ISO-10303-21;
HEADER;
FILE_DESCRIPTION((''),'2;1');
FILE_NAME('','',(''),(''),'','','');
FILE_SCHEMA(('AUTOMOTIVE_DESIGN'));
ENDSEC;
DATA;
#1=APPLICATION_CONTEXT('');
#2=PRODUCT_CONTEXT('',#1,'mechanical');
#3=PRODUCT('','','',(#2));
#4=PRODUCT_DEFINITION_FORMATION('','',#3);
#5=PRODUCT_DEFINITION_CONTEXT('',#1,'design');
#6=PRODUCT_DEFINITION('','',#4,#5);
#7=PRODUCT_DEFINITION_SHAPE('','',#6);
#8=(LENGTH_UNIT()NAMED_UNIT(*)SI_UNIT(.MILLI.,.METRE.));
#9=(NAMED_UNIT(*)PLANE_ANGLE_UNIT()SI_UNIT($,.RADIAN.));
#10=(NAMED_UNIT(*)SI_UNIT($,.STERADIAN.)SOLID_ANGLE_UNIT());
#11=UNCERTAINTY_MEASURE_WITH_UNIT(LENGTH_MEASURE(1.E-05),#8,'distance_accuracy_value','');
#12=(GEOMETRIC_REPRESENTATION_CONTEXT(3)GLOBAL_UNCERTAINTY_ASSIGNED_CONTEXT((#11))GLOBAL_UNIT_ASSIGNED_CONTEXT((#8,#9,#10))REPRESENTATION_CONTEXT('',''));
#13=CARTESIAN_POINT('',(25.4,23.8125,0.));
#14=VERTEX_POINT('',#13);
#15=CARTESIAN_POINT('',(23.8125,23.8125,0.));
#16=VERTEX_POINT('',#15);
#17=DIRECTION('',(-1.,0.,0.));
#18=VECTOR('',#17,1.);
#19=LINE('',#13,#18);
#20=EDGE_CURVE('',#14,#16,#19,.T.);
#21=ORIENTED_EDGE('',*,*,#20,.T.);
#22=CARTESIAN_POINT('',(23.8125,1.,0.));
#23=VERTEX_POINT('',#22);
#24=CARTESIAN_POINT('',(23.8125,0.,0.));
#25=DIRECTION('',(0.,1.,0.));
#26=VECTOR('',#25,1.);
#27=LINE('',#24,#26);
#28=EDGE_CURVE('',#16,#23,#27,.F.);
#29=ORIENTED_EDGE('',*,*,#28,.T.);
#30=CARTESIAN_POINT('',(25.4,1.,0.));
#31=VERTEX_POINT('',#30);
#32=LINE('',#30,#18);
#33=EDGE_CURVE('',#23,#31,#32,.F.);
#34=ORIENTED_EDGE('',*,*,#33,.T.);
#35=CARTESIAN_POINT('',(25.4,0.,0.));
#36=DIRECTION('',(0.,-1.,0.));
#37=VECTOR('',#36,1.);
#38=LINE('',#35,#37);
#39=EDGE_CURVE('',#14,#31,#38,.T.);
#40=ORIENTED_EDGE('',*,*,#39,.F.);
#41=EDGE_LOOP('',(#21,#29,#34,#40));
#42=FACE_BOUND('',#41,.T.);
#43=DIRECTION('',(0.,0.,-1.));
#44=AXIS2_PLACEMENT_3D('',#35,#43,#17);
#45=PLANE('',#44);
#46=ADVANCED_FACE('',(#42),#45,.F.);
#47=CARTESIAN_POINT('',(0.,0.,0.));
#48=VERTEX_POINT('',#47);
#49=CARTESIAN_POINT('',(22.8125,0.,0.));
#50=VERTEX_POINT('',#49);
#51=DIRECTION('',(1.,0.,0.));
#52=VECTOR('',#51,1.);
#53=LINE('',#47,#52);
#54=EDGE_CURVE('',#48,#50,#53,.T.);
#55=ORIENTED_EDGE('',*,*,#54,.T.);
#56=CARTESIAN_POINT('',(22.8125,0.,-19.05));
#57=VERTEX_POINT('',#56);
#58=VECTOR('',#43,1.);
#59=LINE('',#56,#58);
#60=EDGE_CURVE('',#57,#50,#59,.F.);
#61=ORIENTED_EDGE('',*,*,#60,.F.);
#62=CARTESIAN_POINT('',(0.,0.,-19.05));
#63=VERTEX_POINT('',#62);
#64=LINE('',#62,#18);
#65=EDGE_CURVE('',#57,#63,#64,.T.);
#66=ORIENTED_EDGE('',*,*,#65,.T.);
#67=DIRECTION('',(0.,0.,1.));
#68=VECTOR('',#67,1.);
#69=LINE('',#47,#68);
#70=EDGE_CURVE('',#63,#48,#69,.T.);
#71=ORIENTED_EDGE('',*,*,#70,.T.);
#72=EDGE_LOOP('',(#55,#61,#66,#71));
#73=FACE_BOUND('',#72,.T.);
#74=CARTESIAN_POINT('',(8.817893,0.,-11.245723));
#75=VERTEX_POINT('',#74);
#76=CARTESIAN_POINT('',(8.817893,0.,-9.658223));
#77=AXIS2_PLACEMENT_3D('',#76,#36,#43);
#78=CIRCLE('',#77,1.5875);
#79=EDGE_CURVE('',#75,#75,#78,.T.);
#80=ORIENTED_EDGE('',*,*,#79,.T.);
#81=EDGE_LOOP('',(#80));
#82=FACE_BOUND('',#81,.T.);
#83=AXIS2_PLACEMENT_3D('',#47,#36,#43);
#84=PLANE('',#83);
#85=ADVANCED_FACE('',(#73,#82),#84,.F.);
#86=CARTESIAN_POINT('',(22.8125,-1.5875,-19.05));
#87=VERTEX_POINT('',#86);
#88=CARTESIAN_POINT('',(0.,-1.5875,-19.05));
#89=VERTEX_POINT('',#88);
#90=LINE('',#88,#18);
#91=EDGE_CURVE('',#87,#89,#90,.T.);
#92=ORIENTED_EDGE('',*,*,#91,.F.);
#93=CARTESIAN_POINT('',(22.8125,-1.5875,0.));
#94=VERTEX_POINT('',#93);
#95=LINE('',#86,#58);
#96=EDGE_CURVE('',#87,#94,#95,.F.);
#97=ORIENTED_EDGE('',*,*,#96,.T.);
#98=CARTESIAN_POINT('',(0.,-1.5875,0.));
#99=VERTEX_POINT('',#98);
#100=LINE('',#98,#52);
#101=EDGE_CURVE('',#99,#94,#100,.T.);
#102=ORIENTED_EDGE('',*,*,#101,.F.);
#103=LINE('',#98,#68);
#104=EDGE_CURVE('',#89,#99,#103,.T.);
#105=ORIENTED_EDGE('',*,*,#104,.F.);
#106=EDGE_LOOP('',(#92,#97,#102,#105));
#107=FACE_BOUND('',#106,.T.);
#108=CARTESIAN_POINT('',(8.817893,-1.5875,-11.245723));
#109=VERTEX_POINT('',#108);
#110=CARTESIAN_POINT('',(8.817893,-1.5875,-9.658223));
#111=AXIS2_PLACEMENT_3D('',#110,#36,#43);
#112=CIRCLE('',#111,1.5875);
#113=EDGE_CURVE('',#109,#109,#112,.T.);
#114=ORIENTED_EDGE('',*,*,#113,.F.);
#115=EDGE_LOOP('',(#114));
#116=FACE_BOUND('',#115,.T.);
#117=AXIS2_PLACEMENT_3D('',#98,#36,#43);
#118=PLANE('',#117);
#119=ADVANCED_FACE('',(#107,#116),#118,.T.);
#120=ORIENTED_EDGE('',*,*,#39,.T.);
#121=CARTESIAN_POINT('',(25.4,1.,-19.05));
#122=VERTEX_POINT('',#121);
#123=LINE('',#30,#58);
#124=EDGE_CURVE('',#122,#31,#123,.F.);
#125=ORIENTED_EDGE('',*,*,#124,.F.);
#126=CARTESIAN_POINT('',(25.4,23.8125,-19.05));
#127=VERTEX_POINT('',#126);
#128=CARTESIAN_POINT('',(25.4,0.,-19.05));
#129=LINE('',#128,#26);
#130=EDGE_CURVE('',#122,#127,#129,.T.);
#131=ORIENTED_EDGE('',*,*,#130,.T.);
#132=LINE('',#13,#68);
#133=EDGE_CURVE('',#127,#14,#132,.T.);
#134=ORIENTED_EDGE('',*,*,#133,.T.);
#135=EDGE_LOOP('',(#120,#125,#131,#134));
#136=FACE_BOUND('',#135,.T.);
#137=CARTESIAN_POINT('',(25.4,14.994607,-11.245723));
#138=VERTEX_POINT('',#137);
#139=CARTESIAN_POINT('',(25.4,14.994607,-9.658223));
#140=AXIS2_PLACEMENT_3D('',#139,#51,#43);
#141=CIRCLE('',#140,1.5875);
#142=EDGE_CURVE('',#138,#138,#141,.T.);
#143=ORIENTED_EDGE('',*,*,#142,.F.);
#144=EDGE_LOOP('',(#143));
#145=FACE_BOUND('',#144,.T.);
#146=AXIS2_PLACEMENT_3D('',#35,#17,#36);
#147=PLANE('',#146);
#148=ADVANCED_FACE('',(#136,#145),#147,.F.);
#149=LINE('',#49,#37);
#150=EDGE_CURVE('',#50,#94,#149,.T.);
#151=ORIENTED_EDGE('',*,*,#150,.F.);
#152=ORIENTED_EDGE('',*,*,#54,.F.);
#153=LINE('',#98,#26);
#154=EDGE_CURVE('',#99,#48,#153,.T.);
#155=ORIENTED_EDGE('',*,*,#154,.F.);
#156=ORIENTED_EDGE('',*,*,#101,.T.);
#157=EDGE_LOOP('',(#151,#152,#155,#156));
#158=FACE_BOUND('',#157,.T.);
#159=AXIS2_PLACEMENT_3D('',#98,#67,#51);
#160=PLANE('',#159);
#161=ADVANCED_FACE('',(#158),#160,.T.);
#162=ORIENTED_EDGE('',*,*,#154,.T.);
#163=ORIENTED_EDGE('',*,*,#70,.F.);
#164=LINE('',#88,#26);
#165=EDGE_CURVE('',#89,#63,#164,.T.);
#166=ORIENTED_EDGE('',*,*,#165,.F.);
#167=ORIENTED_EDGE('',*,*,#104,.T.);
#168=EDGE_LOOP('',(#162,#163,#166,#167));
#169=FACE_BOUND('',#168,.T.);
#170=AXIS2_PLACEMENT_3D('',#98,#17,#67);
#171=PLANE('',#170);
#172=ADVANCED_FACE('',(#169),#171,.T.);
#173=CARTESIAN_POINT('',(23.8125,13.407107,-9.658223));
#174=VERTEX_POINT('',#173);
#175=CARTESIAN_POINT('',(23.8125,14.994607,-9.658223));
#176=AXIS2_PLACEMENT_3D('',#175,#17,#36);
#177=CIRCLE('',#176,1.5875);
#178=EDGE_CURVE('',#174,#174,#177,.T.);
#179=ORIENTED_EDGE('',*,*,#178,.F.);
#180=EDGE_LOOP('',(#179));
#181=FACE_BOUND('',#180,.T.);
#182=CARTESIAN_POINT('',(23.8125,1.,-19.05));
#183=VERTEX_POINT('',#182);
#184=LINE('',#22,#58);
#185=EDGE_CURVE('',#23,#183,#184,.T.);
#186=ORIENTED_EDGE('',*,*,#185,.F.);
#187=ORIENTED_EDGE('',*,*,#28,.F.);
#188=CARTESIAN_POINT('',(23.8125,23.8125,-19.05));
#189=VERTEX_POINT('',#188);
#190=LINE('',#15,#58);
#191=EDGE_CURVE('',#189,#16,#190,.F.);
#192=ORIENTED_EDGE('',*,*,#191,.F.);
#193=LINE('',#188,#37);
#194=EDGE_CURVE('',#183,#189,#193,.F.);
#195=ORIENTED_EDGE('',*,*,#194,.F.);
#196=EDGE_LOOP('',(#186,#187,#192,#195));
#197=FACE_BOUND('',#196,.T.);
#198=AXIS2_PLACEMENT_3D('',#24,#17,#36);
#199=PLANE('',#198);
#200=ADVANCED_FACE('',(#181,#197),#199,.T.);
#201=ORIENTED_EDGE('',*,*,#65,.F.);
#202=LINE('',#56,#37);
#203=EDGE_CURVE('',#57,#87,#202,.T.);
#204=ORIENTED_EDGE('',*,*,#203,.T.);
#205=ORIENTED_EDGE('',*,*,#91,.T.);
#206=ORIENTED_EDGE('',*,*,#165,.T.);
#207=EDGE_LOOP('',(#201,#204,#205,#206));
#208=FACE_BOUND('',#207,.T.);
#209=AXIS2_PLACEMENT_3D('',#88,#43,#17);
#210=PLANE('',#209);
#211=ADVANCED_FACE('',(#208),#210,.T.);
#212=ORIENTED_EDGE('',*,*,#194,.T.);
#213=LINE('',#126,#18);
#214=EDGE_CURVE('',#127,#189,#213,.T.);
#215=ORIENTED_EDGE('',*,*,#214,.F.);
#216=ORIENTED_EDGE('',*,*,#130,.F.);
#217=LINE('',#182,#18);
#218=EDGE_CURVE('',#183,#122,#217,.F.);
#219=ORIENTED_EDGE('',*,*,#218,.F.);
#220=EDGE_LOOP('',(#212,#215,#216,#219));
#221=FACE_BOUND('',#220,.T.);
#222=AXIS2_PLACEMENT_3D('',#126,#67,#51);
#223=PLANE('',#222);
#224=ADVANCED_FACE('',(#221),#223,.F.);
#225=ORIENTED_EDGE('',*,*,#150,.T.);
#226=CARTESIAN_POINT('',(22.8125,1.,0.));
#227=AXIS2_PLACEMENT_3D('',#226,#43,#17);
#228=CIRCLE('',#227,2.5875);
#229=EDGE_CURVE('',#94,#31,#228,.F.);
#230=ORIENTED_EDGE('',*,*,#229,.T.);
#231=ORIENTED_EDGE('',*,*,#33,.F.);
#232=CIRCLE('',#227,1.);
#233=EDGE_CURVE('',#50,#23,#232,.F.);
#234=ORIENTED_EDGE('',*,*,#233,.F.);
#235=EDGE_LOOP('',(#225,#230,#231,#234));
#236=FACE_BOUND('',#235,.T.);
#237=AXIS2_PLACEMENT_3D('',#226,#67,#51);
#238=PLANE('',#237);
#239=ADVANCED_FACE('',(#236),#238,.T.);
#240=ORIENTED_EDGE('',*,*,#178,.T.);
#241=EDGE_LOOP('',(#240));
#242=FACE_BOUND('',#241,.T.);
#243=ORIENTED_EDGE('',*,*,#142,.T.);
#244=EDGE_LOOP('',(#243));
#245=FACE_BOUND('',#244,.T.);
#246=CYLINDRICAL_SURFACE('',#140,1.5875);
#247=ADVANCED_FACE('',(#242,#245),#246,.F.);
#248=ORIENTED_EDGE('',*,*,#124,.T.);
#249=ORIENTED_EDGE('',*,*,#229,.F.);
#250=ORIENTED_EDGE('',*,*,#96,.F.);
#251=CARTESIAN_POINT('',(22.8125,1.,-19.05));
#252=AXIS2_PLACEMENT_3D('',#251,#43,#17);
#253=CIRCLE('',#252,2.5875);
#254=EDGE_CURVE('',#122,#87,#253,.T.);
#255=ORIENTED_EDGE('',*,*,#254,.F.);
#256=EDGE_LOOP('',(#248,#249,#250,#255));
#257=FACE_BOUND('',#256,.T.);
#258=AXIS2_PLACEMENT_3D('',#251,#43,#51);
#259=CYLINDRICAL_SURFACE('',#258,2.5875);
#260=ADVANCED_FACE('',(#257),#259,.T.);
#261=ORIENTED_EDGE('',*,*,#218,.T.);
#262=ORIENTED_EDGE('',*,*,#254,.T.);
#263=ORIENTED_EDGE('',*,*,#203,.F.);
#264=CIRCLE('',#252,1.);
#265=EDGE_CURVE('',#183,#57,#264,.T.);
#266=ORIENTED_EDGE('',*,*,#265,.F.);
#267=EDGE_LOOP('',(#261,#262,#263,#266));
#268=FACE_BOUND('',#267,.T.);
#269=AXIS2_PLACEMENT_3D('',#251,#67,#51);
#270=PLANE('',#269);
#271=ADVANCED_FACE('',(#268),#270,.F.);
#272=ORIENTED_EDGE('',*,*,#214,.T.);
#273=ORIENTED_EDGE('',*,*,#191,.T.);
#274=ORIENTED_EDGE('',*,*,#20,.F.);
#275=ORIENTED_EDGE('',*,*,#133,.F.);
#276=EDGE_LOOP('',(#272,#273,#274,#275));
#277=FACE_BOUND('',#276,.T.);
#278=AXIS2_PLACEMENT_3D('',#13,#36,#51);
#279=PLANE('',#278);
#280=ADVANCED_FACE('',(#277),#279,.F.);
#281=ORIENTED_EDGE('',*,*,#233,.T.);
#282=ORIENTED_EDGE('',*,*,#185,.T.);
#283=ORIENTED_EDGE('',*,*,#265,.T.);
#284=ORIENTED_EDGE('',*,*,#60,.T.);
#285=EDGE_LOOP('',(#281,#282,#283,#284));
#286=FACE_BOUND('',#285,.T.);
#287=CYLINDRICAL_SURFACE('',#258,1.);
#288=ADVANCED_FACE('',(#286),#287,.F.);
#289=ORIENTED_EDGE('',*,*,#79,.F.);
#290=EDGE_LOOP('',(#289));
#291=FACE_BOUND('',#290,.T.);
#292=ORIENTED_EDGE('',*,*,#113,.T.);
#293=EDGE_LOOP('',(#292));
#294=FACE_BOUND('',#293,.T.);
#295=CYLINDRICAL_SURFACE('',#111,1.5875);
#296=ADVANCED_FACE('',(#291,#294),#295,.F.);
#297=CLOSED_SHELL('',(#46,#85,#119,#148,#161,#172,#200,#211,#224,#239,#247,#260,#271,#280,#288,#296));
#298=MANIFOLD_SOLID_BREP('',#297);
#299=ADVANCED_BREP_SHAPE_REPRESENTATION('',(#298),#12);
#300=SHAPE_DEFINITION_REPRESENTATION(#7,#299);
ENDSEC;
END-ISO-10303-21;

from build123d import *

# Parameters (mm, degrees)
SKETCH1_W                    = 25.4
SKETCH1_H                    = 19.05
BASE_FLANGE1_DEPTH           = 1.5875
EDGE_FLANGE1_STRIP_W         = 8.35
EDGE_FLANGE1_STRIP_H         = 1.5875
EDGE_FLANGE1_STRIP_CUT_DEPTH = 19.05
EDGE_FLANGE1_DEPTH           = 19.05
F_1_8_0_125_DIAMETER_HOLE1_D = 3.175
F_1_8_0_125_DIAMETER_HOLE2_D = 3.175


# Sheet-metal steps are written as plain solids
with BuildPart() as part:
    # Sketch1 → Base-Flange1 (new body)
    with BuildSketch(Plane(origin=(0, 0, 0), x_dir=(1, 0, 0), z_dir=(0, 1, 0))):
        with Locations((12.7, 9.525)):
            Rectangle(SKETCH1_W, SKETCH1_H)
    extrude(amount=-BASE_FLANGE1_DEPTH)

    # Edge-Flange1 strip (across the edge) → Edge-Flange1 strip cut (cut)
    with BuildSketch(Plane(origin=(25.4, 0, 0), x_dir=(-1, 0, 0), z_dir=(0, 0, -1))):
        with Locations((-1.5875, -0.79375)):
            Rectangle(EDGE_FLANGE1_STRIP_W, EDGE_FLANGE1_STRIP_H)
    extrude(amount=EDGE_FLANGE1_STRIP_CUT_DEPTH, mode=Mode.SUBTRACT)

    # Edge-Flange1 section (across the edge) → Edge-Flange1 (add)
    with BuildSketch(Plane(origin=(25.4, 0, 0), x_dir=(-1, 0, 0), z_dir=(0, 0, -1))):
        with BuildLine():
            Line((0, 1), (0, 23.8125))
            Line((0, 23.8125), (1.5875, 23.8125))
            Line((1.5875, 23.8125), (1.5875, 1))
            ThreePointArc((1.5875, 1), (1.880393219, 0.292893219), (2.5875, 0))
            Line((2.5875, 0), (2.5875, -1.5875))
            ThreePointArc((2.5875, -1.5875), (0.757861204, -0.829638796), (0, 1))
        make_face()
    extrude(amount=EDGE_FLANGE1_DEPTH)

    # 1/8 (0.125) Diameter Hole1 (through all)
    with Locations(Plane(origin=(25.4, 0, 0), x_dir=(0, 0, -1), z_dir=(1, 0, 0))):
        with Locations((9.658223344, 14.994606781)):
            Hole(F_1_8_0_125_DIAMETER_HOLE1_D / 2)

    # 1/8 (0.125) Diameter Hole2 (through all)
    with Locations(Plane(origin=(0, -1.5875, 0), x_dir=(-1, 0, 0), z_dir=(0, -1, 0))):
        with Locations((-8.817893219, 9.658223344)):
            Hole(F_1_8_0_125_DIAMETER_HOLE2_D / 2)


solid = part.part
